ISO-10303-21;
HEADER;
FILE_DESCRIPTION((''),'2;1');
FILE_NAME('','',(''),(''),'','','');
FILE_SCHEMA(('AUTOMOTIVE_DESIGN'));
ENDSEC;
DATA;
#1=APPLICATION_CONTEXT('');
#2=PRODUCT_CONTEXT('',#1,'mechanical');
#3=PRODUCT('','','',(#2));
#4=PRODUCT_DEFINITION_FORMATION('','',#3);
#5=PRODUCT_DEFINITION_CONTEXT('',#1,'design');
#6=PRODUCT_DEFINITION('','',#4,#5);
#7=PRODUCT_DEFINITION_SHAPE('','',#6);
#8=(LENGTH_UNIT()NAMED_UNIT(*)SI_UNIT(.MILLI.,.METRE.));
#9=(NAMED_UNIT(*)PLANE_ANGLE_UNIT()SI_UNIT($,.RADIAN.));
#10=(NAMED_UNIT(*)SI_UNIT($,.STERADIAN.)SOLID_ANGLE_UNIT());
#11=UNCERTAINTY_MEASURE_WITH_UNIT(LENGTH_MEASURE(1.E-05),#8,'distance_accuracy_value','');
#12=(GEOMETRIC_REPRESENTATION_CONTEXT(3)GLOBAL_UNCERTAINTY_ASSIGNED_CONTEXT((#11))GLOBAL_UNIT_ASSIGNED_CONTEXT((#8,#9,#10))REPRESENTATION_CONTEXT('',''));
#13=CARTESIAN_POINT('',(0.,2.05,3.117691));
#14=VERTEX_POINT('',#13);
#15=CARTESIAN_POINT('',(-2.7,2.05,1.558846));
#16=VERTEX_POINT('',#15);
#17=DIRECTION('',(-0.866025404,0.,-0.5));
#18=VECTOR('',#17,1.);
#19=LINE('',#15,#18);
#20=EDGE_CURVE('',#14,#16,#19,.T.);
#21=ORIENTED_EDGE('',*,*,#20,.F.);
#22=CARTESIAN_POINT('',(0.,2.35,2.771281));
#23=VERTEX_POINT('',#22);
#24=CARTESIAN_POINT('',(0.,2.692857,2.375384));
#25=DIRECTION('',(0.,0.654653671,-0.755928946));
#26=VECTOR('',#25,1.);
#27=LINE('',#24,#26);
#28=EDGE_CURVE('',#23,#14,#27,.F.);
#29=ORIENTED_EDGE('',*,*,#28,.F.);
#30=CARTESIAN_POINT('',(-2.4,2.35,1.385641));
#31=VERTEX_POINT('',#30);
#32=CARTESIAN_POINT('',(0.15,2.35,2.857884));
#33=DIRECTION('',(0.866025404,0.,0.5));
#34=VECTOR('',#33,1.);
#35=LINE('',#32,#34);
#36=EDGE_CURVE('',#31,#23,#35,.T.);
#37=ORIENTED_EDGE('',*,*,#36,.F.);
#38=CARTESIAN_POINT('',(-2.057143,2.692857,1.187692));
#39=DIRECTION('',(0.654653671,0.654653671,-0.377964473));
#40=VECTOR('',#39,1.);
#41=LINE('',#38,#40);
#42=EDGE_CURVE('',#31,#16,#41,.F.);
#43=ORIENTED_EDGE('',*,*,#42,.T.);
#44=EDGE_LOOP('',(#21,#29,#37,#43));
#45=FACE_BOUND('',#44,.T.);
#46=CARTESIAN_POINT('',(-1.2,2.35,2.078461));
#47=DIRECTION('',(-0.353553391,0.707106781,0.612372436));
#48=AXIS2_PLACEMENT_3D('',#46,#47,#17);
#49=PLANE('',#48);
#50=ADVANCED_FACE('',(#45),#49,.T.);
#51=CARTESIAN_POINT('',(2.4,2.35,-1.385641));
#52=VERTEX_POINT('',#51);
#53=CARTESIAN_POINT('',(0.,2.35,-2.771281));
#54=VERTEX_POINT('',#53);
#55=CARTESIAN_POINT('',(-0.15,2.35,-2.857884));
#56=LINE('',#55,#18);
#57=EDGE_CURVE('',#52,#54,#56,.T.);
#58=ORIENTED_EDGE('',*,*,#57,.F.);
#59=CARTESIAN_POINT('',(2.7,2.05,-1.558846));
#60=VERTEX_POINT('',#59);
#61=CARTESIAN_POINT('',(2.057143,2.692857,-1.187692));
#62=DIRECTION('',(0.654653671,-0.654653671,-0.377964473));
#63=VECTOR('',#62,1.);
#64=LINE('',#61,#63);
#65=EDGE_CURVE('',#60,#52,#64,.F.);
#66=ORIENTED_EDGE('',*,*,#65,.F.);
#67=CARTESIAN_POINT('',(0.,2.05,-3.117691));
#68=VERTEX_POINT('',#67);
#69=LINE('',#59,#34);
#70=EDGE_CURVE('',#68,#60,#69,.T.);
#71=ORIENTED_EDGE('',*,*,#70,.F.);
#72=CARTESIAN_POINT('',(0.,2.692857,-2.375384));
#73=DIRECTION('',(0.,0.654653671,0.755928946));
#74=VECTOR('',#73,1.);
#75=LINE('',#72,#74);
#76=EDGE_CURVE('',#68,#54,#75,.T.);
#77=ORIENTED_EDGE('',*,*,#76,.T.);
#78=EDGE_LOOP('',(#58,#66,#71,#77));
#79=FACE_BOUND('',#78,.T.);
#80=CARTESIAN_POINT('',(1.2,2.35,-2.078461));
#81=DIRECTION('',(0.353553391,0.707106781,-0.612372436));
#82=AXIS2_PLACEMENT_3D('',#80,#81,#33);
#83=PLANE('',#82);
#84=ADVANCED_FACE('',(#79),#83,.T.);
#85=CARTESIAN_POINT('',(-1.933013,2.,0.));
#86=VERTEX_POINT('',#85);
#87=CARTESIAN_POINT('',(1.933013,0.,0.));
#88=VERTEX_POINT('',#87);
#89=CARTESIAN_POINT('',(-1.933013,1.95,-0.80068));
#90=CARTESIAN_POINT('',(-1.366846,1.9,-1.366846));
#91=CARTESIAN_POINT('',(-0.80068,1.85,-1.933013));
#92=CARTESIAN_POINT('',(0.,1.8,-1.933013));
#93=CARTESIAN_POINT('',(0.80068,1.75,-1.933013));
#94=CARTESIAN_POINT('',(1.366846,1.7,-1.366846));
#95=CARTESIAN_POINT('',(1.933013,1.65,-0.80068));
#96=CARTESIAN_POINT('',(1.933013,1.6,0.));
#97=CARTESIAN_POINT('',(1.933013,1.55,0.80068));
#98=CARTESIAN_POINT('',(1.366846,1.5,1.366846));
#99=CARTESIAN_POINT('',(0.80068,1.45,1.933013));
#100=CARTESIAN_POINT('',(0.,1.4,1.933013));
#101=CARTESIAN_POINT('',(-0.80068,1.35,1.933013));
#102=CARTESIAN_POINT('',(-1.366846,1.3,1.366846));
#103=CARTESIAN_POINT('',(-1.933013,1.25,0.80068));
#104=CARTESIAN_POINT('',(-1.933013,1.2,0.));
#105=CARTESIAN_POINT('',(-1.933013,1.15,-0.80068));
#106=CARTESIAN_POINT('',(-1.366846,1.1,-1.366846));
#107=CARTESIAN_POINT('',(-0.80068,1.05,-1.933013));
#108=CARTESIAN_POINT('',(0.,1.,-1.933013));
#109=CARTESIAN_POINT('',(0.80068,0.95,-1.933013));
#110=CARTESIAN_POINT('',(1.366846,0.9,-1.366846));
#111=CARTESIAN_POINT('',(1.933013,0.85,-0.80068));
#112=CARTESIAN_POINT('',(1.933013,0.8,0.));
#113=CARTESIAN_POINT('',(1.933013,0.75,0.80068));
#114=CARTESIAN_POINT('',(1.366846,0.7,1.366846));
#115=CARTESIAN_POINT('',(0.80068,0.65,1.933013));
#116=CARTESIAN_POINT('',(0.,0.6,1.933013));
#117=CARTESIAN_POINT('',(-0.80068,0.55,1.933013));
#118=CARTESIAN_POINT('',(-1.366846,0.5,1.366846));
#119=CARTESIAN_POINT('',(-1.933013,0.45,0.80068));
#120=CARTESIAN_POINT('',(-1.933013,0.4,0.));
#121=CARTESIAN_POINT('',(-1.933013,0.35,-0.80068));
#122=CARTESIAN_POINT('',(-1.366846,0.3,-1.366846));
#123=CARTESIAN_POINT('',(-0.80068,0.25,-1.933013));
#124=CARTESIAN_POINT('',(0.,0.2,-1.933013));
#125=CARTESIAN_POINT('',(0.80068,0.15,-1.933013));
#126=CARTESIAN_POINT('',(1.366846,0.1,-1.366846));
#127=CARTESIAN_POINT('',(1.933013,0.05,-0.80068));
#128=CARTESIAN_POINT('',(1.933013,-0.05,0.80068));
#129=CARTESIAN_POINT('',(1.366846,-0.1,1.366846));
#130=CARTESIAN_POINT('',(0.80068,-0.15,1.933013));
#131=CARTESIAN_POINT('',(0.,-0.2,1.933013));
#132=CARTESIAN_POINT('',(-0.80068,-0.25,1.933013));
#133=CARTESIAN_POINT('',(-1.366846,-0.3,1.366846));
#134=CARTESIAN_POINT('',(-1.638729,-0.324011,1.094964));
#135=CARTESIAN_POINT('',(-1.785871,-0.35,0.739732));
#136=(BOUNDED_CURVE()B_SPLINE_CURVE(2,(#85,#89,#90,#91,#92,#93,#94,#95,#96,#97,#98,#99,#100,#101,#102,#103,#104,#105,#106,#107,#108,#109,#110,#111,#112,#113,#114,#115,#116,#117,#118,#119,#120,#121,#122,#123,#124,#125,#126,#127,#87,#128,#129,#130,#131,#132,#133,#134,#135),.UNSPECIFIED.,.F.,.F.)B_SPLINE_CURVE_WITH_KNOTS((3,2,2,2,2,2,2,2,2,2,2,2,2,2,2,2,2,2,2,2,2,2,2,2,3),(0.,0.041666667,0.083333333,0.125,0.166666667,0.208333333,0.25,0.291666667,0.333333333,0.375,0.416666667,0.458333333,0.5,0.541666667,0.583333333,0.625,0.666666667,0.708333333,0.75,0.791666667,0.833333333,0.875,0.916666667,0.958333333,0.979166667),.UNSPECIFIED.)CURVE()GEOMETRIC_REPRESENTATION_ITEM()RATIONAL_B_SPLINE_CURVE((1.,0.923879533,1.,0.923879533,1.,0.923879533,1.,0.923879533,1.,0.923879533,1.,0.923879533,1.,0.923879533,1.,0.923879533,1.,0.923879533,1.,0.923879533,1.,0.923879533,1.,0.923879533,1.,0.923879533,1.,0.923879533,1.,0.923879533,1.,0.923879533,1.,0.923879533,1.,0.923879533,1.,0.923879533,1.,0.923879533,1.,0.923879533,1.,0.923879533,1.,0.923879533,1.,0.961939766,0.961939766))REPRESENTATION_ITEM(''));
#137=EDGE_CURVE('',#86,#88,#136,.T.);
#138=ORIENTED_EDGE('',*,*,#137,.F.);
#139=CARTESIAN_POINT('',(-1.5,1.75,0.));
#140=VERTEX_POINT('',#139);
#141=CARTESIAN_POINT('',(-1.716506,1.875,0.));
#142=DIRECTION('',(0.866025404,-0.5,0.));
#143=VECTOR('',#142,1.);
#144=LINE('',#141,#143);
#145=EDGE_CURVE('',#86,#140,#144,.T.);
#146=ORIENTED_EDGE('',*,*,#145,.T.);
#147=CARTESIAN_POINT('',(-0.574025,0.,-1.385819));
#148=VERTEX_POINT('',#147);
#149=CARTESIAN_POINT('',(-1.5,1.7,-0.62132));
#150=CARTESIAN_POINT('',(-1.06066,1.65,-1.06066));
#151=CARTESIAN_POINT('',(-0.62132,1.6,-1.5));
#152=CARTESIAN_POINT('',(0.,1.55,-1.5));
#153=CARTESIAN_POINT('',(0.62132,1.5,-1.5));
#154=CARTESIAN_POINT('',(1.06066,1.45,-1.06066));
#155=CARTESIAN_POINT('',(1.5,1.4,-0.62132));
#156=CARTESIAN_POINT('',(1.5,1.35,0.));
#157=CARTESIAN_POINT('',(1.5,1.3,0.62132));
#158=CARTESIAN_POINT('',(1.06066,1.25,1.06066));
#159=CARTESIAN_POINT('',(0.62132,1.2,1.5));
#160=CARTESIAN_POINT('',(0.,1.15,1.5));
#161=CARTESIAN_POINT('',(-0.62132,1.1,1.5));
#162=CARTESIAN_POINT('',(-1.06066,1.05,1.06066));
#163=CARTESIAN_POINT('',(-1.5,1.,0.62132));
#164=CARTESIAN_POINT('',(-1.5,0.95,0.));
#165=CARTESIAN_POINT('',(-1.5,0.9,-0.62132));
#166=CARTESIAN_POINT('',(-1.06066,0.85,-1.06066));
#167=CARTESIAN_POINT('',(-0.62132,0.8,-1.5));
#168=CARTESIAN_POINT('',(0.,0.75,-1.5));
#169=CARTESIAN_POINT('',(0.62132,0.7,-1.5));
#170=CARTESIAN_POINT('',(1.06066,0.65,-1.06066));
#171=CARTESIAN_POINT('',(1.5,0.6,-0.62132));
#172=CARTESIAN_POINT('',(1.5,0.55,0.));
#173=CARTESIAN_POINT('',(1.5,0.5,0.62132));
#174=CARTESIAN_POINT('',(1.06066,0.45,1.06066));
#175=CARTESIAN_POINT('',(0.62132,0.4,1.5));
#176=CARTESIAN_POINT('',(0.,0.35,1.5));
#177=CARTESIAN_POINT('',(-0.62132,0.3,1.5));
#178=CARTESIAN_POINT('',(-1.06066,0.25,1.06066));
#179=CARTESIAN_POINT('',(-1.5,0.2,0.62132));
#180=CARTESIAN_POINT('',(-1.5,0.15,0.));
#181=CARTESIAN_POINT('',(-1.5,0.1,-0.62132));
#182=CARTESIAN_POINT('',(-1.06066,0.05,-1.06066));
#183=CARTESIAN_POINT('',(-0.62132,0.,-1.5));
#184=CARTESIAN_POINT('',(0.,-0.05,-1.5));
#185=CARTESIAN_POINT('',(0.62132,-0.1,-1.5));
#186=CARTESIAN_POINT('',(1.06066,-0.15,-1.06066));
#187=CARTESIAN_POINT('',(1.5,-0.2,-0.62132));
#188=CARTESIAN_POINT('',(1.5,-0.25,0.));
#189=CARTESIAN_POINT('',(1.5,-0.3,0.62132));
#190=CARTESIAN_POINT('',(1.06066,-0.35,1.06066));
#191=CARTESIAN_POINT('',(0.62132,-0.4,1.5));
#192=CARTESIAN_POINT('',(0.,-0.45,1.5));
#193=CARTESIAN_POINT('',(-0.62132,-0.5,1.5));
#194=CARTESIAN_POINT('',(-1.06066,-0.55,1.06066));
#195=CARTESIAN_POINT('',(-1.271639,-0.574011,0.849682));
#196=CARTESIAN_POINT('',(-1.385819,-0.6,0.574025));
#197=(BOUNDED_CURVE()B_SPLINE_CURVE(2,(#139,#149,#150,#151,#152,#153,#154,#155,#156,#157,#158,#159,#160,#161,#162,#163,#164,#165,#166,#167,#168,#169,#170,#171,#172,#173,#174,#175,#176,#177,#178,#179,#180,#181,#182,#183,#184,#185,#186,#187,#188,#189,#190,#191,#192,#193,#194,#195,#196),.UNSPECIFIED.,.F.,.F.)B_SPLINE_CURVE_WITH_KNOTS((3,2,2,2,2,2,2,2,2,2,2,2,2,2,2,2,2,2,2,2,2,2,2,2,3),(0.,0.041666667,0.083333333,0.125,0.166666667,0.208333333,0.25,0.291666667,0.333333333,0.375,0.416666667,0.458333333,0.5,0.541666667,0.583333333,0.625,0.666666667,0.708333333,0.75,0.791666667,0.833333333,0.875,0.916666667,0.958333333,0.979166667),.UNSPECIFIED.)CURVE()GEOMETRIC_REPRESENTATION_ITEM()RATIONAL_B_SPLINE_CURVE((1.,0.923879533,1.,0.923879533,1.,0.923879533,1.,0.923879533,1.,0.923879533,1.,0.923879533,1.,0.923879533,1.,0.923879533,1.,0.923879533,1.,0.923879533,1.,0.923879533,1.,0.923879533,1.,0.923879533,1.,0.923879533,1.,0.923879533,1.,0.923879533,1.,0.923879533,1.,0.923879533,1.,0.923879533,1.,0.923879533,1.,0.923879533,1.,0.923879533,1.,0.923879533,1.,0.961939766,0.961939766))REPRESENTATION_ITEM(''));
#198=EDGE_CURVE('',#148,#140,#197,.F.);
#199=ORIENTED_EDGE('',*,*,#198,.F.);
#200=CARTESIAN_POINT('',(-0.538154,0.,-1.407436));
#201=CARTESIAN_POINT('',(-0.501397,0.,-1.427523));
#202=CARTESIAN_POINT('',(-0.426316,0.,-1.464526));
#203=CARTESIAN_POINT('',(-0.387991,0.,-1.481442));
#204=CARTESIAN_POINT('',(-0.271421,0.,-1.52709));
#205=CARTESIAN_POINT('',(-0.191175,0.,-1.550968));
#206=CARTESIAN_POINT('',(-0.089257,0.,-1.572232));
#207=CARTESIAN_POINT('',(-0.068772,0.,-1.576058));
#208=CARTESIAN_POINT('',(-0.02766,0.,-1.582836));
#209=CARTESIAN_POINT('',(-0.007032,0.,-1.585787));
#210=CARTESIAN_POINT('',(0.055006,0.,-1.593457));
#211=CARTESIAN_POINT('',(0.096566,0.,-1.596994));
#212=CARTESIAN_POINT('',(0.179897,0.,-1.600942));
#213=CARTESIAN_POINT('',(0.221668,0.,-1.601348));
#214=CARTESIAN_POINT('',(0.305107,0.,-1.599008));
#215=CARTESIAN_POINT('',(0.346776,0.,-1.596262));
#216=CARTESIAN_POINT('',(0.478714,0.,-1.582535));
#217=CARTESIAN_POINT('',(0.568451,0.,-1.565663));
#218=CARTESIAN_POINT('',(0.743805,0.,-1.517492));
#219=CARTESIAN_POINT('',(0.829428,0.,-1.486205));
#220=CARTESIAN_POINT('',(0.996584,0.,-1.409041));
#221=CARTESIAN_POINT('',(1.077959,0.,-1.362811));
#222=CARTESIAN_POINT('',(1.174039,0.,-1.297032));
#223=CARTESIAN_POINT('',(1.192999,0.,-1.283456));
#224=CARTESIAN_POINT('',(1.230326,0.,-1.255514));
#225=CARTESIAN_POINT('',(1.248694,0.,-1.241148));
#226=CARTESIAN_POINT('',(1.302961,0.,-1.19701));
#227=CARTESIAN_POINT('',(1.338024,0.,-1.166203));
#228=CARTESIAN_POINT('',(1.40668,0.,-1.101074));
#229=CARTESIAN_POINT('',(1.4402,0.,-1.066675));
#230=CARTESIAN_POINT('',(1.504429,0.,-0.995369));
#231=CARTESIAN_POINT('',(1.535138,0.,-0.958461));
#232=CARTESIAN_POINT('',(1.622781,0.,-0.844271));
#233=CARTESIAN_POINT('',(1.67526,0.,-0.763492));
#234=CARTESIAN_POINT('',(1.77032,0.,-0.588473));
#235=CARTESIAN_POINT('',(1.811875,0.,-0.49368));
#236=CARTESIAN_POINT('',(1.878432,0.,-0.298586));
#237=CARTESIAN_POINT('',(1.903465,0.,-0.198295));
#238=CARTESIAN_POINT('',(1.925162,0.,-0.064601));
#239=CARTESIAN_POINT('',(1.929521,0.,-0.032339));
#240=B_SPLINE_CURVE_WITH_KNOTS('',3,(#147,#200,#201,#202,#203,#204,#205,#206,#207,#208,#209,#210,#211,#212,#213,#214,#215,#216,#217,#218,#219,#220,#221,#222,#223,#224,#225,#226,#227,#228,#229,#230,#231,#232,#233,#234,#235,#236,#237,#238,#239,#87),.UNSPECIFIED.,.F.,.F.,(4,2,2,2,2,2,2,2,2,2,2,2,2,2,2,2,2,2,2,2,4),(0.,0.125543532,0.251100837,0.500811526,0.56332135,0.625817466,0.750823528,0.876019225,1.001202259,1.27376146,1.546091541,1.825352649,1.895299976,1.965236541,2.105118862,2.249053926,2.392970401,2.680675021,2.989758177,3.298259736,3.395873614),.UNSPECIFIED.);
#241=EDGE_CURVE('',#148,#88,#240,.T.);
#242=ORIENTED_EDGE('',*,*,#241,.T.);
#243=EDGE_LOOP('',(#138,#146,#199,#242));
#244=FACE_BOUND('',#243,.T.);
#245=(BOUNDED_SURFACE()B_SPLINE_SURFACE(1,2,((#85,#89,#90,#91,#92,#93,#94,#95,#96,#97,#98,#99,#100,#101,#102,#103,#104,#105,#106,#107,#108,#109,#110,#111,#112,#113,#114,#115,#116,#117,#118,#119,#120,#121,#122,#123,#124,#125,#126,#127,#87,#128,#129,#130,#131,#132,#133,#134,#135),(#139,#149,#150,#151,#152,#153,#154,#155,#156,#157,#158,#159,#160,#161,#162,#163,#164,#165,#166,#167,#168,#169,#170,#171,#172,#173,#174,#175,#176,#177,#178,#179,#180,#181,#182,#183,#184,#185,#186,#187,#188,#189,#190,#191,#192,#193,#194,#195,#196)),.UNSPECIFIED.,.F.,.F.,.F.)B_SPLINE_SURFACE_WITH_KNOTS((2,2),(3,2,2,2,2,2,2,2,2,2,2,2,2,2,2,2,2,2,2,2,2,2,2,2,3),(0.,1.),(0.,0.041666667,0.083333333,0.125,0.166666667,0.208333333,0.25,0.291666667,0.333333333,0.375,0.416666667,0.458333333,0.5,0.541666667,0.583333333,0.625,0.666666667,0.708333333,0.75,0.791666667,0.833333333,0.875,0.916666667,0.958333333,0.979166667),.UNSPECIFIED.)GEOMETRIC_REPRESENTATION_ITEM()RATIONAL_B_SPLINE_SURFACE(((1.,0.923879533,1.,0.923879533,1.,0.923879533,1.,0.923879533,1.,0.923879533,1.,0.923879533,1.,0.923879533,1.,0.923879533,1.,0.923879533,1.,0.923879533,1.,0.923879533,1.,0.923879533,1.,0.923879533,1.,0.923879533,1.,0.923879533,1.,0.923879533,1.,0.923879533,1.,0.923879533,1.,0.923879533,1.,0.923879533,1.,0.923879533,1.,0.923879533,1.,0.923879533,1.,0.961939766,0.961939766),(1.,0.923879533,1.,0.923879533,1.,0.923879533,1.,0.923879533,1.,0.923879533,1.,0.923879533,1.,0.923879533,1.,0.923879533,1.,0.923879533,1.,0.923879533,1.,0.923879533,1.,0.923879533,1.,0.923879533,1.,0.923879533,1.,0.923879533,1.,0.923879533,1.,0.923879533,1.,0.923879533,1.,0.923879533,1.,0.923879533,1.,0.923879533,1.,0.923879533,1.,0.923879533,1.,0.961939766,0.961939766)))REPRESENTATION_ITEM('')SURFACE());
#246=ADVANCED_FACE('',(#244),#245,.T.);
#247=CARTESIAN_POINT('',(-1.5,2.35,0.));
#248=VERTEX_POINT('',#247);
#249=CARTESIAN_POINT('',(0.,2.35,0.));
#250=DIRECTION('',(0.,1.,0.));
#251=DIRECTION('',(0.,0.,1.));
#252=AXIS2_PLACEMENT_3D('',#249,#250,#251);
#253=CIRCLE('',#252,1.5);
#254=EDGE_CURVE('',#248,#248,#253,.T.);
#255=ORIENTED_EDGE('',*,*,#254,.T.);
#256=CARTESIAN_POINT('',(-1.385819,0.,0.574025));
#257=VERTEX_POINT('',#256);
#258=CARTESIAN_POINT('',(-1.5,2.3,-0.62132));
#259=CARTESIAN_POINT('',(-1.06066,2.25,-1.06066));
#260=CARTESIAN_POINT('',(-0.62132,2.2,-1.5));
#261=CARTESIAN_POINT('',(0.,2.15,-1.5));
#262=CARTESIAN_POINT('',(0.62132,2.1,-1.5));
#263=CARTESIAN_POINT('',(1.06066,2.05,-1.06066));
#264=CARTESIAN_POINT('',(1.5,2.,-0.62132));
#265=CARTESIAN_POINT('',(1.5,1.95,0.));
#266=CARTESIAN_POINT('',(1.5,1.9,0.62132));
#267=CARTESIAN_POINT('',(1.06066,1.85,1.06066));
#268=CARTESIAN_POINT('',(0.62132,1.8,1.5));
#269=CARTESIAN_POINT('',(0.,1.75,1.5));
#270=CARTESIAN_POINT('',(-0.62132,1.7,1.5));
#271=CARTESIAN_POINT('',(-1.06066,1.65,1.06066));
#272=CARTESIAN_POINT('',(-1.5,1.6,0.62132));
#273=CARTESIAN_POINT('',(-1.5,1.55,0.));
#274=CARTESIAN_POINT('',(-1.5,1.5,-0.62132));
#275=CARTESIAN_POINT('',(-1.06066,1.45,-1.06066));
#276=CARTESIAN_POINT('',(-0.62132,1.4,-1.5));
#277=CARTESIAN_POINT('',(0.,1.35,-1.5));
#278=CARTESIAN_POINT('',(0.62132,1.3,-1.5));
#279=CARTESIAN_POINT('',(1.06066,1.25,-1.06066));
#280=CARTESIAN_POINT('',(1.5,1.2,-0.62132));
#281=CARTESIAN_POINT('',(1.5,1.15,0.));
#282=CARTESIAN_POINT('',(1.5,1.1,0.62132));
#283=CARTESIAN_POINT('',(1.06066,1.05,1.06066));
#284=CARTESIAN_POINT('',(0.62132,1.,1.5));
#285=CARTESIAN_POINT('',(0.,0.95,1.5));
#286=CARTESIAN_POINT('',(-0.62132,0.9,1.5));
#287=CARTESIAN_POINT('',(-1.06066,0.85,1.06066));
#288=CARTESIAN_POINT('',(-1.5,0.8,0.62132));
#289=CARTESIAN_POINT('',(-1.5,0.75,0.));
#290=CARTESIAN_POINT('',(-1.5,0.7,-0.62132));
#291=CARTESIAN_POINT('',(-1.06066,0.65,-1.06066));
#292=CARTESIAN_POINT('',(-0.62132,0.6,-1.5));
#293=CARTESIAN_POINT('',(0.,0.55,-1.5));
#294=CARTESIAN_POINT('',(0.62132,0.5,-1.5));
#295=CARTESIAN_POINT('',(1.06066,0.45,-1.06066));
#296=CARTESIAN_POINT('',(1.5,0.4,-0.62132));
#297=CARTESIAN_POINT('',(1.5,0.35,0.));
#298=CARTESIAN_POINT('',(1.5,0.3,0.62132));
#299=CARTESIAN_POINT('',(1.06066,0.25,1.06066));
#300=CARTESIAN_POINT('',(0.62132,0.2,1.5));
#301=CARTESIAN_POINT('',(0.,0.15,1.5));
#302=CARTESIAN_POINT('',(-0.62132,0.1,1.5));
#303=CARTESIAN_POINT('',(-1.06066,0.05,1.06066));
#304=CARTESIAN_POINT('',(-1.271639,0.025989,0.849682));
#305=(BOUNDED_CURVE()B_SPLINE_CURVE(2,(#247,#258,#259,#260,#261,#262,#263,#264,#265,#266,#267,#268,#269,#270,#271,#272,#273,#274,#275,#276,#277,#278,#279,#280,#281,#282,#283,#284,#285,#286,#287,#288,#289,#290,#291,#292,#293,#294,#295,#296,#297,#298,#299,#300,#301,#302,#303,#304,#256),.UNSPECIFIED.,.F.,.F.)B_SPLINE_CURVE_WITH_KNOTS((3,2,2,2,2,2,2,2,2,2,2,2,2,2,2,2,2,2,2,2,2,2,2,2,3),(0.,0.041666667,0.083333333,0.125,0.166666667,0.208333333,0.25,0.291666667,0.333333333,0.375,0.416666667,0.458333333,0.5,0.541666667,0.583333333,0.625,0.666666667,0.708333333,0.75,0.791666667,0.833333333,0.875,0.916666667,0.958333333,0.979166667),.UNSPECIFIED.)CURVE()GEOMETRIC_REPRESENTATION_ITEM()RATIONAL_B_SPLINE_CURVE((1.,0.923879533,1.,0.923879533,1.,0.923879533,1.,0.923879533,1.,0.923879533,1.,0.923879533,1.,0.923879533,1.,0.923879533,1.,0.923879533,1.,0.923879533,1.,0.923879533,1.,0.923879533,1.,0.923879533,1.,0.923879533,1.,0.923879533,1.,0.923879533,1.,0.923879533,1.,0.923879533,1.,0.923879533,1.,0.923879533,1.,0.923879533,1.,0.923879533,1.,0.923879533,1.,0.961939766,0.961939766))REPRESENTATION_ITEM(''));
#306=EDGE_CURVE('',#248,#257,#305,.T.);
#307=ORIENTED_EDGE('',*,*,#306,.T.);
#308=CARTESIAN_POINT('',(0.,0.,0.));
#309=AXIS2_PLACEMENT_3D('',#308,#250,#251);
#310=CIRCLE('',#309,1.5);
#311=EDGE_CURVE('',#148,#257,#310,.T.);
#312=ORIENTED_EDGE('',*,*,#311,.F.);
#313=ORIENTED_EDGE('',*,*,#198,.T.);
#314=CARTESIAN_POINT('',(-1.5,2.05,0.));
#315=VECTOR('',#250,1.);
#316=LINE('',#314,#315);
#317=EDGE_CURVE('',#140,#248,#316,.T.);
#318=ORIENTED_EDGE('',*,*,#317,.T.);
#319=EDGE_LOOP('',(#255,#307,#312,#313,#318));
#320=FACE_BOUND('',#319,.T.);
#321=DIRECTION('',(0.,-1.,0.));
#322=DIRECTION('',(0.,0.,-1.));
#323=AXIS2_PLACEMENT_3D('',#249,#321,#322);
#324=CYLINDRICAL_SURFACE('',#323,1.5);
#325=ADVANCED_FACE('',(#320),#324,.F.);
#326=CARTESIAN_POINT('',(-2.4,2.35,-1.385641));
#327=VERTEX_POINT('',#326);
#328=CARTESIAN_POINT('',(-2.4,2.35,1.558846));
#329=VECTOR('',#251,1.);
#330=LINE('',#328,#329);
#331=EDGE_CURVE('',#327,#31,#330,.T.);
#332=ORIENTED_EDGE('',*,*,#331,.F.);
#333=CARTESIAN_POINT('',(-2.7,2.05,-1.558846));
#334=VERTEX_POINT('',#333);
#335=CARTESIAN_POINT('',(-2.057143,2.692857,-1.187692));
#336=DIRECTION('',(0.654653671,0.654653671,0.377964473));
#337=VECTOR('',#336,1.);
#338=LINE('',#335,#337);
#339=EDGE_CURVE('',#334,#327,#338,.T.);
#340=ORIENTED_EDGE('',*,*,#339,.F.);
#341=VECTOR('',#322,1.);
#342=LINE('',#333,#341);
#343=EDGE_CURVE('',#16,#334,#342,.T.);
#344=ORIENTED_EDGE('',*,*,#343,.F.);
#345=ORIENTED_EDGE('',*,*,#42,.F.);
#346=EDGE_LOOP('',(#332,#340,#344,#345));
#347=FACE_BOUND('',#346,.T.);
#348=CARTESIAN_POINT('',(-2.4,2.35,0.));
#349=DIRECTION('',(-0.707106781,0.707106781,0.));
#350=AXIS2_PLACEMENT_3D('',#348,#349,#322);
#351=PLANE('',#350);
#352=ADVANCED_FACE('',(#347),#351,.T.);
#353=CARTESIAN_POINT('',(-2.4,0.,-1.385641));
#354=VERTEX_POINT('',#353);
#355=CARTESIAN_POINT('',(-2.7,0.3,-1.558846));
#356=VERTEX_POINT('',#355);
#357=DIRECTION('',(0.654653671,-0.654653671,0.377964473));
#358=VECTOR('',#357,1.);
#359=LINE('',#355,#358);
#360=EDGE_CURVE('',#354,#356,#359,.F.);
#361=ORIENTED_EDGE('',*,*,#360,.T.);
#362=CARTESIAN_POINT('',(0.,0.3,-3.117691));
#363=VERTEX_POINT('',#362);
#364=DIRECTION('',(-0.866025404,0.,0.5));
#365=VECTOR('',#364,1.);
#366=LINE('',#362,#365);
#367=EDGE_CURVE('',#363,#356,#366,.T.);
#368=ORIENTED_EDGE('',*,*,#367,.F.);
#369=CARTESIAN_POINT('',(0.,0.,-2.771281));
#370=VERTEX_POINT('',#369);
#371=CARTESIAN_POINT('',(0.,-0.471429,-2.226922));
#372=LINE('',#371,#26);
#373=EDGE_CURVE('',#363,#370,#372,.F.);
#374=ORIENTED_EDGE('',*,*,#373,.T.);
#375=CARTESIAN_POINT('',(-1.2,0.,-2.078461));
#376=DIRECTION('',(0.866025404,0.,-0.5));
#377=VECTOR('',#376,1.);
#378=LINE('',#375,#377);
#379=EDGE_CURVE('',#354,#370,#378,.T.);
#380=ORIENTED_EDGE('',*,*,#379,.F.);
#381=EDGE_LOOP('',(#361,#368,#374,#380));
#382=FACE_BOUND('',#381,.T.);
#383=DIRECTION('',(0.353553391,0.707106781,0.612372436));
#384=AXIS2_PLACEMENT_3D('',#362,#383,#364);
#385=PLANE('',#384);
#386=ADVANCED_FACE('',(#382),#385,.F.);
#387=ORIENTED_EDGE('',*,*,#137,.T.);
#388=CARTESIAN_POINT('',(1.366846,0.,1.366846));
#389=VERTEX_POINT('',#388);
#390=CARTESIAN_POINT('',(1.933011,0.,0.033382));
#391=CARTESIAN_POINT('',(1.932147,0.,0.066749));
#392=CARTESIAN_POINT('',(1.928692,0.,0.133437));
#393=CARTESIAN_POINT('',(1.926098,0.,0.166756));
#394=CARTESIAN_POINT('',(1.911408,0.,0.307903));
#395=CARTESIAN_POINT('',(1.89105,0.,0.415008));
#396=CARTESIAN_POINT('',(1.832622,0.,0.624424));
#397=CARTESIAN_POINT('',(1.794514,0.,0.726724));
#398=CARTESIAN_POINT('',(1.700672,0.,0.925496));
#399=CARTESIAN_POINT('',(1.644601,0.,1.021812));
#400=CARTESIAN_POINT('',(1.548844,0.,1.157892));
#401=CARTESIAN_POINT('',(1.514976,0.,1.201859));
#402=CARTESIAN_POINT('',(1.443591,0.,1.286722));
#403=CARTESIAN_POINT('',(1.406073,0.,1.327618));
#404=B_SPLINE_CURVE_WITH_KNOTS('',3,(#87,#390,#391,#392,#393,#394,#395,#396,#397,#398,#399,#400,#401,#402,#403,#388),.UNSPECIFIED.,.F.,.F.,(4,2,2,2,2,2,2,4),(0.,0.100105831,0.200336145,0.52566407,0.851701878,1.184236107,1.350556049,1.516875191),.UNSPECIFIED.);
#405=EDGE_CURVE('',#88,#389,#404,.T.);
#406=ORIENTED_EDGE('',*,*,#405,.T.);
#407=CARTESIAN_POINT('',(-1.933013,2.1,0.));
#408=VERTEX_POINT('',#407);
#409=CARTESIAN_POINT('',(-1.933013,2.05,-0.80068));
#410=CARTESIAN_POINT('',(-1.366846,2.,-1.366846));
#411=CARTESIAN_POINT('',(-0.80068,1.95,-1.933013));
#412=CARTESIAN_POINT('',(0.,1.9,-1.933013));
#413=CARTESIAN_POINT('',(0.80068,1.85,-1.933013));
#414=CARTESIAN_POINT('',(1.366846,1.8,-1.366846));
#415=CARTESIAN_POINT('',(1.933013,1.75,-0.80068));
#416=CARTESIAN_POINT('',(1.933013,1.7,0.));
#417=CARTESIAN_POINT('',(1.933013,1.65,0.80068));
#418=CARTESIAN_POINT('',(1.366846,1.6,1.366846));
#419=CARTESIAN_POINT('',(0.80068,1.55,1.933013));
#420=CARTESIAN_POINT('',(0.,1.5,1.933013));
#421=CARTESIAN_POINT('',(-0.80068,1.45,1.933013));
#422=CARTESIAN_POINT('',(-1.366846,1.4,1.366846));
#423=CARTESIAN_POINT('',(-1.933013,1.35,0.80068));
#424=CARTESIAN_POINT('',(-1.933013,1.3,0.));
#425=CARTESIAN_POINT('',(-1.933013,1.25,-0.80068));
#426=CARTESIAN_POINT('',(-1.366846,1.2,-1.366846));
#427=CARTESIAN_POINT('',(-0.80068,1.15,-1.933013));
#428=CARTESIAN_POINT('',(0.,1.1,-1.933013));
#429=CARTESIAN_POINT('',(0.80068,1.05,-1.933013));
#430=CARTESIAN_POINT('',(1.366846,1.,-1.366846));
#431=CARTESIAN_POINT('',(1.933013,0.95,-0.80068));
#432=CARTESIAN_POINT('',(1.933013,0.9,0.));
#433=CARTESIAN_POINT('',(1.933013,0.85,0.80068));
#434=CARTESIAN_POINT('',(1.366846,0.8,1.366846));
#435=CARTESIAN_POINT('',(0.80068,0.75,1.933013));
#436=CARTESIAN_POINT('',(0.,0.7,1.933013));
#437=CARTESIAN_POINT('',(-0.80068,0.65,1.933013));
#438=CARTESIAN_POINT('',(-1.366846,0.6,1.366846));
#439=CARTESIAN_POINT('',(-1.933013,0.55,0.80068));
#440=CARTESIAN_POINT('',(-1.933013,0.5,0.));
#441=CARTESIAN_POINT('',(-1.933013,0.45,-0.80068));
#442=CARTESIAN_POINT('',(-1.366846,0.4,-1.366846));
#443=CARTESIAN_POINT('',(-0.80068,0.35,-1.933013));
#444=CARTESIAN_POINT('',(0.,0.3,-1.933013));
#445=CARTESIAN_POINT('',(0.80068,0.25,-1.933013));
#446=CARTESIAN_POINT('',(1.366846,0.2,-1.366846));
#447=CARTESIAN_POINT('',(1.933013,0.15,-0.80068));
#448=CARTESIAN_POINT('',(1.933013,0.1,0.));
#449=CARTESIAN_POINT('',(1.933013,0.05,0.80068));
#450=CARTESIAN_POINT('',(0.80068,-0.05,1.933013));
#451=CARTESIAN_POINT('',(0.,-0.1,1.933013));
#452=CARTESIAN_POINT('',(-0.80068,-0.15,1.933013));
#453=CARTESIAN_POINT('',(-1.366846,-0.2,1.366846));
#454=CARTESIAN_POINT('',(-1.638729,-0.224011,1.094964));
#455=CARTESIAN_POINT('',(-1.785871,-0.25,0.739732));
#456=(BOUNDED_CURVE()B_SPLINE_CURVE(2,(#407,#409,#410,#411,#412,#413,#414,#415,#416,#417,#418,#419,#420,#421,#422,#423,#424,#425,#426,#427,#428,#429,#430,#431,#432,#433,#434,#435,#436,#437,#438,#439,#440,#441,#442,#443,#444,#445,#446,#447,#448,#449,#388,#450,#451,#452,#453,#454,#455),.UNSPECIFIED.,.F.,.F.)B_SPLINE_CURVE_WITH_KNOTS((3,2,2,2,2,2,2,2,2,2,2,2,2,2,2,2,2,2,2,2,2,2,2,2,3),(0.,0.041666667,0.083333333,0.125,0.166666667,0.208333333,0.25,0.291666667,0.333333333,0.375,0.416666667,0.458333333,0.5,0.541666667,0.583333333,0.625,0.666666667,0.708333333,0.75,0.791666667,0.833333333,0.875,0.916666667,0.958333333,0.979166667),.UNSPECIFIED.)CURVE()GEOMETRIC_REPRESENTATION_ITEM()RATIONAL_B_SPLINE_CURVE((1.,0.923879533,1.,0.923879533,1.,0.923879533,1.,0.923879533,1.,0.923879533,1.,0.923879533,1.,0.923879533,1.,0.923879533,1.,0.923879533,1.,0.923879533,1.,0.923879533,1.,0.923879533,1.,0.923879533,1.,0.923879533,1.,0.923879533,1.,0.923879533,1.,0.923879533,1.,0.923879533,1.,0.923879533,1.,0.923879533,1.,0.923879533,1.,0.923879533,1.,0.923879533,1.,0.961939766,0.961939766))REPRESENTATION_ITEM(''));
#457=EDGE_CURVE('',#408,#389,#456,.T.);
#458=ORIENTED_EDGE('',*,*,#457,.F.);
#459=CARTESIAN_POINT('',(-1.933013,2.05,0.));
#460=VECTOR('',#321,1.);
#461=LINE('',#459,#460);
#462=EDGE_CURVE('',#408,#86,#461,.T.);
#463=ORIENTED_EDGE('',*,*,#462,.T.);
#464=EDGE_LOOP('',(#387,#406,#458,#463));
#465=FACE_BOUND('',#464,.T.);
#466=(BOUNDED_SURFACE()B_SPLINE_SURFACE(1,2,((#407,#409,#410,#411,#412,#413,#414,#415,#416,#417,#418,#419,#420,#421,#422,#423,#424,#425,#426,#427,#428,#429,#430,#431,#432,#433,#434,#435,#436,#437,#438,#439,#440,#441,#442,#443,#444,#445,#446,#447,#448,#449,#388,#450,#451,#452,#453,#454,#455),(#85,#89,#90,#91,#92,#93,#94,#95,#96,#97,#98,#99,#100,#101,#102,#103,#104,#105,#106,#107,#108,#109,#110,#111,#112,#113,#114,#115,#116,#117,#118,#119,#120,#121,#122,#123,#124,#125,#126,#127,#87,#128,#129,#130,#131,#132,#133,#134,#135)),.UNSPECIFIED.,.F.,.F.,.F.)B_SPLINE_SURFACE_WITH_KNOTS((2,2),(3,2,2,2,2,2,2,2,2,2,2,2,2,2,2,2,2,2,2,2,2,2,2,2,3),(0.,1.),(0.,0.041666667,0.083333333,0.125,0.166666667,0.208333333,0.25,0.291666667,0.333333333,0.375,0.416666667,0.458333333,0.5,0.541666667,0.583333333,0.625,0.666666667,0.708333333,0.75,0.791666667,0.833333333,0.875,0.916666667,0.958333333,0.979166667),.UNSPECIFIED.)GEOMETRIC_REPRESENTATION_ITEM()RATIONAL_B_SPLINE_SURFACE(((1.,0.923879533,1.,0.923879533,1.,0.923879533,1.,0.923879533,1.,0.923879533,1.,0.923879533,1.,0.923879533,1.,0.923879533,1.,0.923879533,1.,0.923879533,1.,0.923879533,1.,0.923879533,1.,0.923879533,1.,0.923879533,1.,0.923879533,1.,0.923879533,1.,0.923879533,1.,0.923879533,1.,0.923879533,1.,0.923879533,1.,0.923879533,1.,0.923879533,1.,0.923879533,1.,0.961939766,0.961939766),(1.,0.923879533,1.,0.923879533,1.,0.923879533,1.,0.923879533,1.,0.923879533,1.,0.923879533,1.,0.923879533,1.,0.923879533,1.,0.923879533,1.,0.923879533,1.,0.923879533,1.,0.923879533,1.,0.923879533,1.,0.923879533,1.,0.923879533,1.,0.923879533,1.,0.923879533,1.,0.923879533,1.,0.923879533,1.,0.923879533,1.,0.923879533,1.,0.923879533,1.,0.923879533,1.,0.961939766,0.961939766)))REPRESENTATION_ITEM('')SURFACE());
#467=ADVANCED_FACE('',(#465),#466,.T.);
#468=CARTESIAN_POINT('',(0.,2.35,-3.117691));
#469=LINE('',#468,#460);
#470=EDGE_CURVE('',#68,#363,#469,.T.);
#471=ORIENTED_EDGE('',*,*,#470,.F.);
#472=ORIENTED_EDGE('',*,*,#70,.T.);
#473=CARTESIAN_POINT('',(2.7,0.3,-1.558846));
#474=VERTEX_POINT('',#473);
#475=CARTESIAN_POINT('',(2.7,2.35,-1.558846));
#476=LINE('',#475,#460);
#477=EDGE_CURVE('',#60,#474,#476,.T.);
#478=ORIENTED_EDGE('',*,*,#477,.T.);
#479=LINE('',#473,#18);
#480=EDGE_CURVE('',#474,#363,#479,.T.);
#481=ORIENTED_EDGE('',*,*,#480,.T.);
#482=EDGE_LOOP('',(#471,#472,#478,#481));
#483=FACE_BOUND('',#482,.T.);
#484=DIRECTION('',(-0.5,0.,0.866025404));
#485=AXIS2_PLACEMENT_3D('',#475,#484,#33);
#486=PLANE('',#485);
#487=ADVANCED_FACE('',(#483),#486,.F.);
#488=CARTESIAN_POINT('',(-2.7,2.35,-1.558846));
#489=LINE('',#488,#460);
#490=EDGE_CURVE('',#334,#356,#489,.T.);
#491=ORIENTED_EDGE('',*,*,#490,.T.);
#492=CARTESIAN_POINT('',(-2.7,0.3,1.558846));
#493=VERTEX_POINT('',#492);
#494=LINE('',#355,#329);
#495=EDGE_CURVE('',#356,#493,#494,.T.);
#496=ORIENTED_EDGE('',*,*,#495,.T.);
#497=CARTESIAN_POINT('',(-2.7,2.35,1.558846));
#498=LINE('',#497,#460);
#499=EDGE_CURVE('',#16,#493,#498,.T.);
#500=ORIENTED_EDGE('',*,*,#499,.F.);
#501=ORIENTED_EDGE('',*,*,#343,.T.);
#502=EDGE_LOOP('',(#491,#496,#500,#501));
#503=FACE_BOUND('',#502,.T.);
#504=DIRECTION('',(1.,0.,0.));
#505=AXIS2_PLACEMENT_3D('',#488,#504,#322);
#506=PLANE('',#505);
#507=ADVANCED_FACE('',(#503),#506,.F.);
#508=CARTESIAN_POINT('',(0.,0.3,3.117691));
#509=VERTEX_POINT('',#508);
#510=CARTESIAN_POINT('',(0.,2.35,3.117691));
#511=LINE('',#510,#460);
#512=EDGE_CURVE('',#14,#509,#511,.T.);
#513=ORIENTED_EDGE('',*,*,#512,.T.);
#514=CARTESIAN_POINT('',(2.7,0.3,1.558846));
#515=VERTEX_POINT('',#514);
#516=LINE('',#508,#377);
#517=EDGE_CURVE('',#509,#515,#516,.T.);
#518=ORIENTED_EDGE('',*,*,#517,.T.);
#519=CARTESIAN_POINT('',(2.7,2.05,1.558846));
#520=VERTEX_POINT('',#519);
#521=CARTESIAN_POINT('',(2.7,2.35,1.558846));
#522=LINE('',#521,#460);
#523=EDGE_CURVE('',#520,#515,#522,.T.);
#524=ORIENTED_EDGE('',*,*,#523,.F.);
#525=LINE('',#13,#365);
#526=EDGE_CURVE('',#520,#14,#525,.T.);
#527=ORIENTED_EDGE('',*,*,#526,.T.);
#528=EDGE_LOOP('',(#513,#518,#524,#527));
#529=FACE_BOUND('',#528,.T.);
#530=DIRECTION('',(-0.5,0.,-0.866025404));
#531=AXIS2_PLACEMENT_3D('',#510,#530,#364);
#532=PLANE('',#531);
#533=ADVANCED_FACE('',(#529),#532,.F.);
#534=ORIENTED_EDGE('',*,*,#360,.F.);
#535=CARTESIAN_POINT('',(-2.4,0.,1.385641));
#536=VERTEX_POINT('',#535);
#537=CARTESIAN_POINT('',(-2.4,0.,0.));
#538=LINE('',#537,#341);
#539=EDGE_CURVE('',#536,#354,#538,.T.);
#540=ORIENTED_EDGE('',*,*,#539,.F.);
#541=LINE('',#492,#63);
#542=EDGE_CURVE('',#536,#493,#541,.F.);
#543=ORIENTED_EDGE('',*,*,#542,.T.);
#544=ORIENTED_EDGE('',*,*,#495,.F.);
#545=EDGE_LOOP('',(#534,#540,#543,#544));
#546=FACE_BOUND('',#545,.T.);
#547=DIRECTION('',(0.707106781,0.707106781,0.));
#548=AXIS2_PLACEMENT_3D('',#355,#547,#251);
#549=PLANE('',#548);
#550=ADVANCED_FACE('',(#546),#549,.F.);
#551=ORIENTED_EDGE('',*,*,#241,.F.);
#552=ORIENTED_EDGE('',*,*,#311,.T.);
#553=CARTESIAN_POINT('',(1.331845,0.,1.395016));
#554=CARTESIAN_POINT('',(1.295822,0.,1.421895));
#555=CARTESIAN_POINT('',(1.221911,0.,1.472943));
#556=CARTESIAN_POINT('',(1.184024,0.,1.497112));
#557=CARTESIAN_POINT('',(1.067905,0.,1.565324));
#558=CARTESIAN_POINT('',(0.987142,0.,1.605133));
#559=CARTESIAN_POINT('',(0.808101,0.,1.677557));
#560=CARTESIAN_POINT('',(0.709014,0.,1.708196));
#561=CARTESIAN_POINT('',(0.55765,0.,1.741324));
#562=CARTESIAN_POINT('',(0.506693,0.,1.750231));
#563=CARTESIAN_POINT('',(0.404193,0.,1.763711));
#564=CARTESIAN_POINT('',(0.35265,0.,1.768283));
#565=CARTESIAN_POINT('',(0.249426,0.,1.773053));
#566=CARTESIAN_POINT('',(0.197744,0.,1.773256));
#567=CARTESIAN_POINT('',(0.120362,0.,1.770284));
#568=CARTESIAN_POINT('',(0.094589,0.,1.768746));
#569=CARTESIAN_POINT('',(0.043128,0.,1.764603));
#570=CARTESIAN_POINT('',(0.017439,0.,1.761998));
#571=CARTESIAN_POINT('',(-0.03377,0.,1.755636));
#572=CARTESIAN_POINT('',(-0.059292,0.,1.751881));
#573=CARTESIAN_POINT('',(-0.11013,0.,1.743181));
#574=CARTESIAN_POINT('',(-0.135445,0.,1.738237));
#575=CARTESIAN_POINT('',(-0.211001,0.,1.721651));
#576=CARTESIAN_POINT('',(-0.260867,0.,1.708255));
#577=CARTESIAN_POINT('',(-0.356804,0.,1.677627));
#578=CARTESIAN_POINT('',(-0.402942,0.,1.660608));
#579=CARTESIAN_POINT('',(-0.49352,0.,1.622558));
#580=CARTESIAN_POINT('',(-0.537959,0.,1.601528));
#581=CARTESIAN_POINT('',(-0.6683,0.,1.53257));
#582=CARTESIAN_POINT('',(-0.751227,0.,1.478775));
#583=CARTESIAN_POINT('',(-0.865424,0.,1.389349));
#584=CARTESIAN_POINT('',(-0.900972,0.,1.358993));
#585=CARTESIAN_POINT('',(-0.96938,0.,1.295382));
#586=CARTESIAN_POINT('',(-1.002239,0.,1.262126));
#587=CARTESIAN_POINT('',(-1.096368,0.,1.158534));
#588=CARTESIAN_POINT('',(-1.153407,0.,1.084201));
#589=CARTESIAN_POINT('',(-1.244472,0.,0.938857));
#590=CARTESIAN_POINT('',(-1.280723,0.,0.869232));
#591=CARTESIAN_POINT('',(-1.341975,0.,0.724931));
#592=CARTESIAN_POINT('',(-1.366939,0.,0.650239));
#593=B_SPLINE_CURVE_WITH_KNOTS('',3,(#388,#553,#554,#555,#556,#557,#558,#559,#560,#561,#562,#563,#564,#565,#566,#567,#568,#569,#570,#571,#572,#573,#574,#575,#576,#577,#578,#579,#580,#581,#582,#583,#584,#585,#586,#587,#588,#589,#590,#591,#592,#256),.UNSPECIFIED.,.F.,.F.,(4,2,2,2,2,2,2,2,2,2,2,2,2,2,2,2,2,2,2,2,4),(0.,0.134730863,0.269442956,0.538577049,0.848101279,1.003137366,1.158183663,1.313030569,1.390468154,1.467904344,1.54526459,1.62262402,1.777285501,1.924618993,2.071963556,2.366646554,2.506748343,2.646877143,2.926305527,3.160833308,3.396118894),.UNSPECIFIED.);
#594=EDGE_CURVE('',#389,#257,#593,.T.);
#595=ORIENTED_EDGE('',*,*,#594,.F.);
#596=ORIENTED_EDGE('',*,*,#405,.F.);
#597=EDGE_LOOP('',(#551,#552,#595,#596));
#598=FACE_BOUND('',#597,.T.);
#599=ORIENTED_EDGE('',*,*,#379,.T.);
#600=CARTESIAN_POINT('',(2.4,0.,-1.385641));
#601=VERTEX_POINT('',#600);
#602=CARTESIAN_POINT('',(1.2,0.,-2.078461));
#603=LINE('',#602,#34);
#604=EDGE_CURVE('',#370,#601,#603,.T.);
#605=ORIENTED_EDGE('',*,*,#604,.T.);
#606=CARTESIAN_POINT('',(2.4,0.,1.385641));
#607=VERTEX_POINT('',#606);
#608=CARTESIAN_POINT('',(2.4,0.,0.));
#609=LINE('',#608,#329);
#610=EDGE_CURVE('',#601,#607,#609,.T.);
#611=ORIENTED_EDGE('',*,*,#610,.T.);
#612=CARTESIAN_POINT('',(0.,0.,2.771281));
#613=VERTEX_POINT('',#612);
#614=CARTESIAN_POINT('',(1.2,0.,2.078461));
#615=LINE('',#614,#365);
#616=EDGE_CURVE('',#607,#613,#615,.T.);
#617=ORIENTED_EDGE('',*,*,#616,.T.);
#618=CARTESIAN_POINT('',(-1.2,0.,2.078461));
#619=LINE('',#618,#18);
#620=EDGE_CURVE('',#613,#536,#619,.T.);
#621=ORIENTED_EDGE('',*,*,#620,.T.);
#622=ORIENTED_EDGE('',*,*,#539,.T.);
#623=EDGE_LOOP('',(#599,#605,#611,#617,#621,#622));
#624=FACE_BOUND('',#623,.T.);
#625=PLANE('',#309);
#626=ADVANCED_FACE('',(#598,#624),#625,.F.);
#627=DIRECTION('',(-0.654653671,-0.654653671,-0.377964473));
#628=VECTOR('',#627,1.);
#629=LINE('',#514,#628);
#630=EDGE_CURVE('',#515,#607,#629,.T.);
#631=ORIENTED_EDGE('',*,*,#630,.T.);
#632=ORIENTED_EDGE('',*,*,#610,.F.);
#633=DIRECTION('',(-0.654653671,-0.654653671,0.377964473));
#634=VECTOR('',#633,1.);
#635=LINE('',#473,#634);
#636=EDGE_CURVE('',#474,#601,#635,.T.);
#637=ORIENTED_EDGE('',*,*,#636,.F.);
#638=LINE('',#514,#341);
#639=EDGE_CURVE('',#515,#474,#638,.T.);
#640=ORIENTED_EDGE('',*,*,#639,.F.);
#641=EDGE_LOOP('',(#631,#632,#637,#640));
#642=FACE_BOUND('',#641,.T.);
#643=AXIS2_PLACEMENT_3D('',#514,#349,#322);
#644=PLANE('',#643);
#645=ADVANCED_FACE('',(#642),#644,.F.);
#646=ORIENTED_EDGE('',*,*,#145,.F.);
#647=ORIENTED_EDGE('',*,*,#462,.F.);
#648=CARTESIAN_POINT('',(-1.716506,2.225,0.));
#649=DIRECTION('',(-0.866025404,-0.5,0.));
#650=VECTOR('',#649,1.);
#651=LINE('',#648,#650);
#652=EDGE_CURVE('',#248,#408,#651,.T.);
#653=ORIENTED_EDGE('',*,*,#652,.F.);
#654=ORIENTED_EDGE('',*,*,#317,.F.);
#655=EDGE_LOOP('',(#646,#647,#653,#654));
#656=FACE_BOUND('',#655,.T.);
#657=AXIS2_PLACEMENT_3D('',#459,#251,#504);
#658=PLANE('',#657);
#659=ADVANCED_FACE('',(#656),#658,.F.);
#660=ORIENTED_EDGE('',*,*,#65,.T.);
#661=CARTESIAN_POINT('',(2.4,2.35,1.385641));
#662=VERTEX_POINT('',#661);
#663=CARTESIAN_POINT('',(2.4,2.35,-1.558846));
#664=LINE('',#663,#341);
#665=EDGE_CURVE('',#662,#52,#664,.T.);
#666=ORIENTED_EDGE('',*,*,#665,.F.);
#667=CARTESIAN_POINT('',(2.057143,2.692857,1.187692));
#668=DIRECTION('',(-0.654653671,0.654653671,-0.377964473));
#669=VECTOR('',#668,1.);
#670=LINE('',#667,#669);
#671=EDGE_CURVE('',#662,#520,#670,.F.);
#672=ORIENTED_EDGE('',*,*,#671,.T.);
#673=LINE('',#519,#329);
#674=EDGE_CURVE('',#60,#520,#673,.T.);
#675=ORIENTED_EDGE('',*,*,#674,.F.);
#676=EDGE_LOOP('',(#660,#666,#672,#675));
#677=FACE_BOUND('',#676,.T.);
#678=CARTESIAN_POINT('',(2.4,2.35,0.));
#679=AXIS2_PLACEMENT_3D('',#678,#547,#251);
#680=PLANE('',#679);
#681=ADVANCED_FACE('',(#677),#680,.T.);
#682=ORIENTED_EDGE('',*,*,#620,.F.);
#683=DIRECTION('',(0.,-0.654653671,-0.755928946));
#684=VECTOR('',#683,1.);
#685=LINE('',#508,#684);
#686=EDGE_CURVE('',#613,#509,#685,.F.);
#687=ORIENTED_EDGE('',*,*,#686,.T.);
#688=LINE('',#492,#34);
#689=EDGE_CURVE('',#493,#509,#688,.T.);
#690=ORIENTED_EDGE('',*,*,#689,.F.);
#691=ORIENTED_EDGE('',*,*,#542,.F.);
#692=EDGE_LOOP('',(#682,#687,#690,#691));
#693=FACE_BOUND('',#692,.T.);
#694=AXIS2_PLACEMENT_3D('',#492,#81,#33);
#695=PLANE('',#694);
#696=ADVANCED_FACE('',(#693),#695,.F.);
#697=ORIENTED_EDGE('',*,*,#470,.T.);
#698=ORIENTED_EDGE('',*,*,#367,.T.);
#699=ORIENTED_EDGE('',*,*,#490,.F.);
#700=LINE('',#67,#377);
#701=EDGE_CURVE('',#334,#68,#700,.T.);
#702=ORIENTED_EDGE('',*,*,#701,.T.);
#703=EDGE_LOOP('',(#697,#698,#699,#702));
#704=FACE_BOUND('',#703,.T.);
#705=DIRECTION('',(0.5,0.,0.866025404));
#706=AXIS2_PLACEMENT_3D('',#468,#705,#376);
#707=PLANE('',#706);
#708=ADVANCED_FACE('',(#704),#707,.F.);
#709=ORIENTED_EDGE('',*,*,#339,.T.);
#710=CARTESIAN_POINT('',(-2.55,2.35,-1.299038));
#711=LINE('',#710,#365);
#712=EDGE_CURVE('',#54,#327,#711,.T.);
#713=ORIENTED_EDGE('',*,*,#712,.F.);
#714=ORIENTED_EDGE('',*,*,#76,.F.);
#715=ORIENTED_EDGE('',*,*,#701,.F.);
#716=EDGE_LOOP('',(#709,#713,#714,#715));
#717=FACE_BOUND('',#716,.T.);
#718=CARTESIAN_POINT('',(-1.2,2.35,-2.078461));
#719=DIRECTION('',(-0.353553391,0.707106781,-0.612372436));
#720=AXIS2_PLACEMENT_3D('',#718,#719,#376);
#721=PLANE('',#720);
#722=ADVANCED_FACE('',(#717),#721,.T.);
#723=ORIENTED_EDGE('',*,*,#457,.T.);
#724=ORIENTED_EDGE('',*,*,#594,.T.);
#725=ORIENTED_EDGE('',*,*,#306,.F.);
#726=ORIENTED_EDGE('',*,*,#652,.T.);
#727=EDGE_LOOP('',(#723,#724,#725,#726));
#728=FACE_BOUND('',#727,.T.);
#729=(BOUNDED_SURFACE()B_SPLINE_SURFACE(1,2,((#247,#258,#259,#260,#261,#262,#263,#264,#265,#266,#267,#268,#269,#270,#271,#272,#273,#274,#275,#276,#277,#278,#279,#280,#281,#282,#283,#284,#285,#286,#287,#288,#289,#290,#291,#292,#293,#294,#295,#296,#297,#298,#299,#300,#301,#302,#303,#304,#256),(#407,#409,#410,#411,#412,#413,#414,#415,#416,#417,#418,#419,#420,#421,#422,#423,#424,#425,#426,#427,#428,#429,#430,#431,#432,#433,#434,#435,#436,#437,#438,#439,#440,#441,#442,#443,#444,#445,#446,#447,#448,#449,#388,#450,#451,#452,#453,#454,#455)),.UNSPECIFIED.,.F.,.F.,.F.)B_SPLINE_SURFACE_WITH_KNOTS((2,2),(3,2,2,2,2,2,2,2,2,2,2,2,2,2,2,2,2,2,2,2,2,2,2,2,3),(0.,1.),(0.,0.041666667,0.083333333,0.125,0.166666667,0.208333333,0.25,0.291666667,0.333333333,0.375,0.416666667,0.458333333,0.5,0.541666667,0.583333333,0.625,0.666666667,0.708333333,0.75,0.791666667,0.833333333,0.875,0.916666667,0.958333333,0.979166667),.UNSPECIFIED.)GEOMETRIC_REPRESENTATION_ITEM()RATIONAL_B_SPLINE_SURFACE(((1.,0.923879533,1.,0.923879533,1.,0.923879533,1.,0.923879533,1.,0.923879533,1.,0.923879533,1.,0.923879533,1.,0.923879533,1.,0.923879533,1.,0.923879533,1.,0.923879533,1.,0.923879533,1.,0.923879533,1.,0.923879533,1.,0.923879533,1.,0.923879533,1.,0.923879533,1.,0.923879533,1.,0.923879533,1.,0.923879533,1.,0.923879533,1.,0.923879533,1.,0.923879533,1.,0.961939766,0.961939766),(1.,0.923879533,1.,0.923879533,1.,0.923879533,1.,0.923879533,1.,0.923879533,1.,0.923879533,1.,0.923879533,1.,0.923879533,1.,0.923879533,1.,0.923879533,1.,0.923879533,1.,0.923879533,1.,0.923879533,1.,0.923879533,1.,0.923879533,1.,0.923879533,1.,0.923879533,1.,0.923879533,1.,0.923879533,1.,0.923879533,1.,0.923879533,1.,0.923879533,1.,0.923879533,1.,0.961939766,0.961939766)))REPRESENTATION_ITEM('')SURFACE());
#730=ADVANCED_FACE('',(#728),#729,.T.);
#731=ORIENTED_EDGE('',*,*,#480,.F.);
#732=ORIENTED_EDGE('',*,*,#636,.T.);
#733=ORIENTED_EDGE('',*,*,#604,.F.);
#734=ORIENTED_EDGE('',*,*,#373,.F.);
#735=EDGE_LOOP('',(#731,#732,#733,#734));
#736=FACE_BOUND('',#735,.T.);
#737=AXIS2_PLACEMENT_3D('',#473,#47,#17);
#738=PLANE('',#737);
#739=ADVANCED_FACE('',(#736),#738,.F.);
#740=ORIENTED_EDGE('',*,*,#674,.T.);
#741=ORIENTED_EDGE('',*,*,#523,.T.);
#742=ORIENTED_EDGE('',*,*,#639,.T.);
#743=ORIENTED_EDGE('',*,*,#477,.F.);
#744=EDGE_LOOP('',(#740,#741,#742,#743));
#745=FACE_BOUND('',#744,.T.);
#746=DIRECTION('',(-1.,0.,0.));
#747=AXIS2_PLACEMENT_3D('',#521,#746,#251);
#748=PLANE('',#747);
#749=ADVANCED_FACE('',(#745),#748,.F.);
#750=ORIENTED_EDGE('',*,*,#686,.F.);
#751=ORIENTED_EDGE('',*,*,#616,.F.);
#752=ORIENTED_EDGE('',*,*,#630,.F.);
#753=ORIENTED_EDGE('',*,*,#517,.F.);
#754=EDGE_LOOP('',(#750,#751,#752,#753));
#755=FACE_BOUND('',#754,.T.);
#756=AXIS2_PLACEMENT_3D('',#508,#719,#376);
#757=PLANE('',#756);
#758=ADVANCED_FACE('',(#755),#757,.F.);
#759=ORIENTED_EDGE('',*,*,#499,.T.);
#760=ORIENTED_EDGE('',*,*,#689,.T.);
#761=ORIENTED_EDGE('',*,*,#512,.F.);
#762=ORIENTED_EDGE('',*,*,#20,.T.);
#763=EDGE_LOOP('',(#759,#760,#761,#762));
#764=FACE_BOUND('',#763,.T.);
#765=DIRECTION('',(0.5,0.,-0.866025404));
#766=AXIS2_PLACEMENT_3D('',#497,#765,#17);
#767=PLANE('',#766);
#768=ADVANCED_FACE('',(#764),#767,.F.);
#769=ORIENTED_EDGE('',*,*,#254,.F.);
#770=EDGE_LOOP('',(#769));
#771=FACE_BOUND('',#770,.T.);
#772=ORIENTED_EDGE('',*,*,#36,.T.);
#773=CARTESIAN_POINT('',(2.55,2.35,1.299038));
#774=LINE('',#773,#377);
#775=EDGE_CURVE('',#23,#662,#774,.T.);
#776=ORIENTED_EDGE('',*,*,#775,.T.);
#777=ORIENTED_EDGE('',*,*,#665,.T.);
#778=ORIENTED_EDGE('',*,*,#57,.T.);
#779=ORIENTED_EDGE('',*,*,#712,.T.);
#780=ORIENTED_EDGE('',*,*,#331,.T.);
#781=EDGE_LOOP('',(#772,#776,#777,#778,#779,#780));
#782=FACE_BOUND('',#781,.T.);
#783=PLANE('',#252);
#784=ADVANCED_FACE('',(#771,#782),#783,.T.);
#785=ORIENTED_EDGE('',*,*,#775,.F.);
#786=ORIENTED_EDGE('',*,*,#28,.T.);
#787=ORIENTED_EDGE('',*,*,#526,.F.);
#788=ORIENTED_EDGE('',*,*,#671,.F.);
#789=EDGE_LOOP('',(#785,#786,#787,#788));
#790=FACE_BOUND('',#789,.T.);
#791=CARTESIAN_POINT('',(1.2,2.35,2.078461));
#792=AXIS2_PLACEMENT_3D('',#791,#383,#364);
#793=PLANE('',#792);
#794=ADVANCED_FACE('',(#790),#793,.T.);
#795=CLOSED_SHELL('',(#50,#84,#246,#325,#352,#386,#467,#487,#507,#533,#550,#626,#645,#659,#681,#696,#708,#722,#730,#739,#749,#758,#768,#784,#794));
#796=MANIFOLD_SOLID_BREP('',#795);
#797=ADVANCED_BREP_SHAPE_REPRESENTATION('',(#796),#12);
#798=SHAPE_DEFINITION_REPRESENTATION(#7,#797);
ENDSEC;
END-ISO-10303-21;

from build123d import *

# Parameters (mm, degrees)
SKETCH_1_R      = 1.5
EXTRUDE_1_DEPTH = 2.35
CHAMFER_1_SIZE  = 0.3
THREAD_1_PITCH  = 0.8


with BuildPart() as part:
    # Sketch 1 → 凸台-拉伸1 (new body)
    with BuildSketch(Plane(origin=(0, 0, 0), x_dir=(1, 0, 0), z_dir=(0, 1, 0))):
        Polygon((0, 3.117691454), (-2.7, 1.558845727), (-2.7, -1.558845727), (0, -3.117691454), (2.7, -1.558845727), (2.7, 1.558845727), align=None)
        with Locations(Location((0, 0, 0), (0, 0, 270))):
            Circle(SKETCH_1_R, mode=Mode.SUBTRACT)
    extrude(amount=EXTRUDE_1_DEPTH)

    # 倒角1
    chamfer_1_edges = [part.edges().sort_by_distance(p)[0] for p in [
        (-2.7, 2.35, 0),
        (-1.35, 2.35, 2.33826859),
        (1.35, 2.35, 2.33826859),
        (2.7, 2.35, 0),
        (1.35, 2.35, -2.33826859),
        (2.7, 0, 0),
        (1.35, 0, 2.33826859),
        (-1.35, 0, 2.33826859),
        (-1.35, 2.35, -2.33826859),
        (-2.7, 0, 0),
        (-1.35, 0, -2.33826859),
        (1.35, 0, -2.33826859),
    ]]
    chamfer(chamfer_1_edges, length=CHAMFER_1_SIZE)

    # 螺纹线1: the profile of Sketch 1 2 profile screwed along a right-hand helix of 2.9375 turns, 8 arcs to a turn; built about Z, then put on its axis
    thread_1_z = Axis((0, 0, 0), (0, 0, 1))
    thread_1_corners = [(1.4997, 0, -0.000173205), (1.9330127, 0, 0.249999999), (1.9330127, 0, 0.349999999), (1.4997, 0, 0.600173203)]
    with BuildLine(mode=Mode.PRIVATE) as thread_1_profile:
        Line(thread_1_corners[0], thread_1_corners[1])
        Line(thread_1_corners[1], thread_1_corners[2])
        Line(thread_1_corners[2], thread_1_corners[3])
        Line(thread_1_corners[3], thread_1_corners[0])
    thread_1_cap = Face(thread_1_profile.wire())
    thread_1_turn_angles = [0, 22.5, 45, 67.5, 90, 112.5, 135, 157.5, 180, 202.5, 225, 247.5, 270, 292.5, 315, 337.5, 360]
    thread_1_turn_weights = [1, 0.9238795325112867, 1, 0.9238795325112867, 1, 0.9238795325112867, 1, 0.9238795325112867, 1, 0.9238795325112867, 1, 0.9238795325112867, 1, 0.9238795325112867, 1, 0.9238795325112867, 1]
    thread_1_turn_rails = [Edge.make_bspline([Vector(p[0], p[1], 0).rotate(thread_1_z, thread_1_turn_angles[k]) / thread_1_turn_weights[k] + Vector(0, 0, p[2] + THREAD_1_PITCH * thread_1_turn_angles[k] / 360) for k in range(17)], [0, 0, 0, 1, 1, 2, 2, 3, 3, 4, 4, 5, 5, 6, 6, 7, 7, 8, 8, 8], 2, thread_1_turn_weights) for p in thread_1_corners]
    thread_1_turn_sides = [Face.make_surface_from_curves(thread_1_turn_rails[p[0]], thread_1_turn_rails[p[1]]) for p in [(0, 1), (1, 2), (2, 3), (3, 0)]]
    thread_1_last_angles = [720, 742.5, 765, 787.5, 810, 832.5, 855, 877.5, 900, 922.5, 945, 967.5, 990, 1012.5, 1035, 1046.25, 1057.5]
    thread_1_last_weights = [1, 0.9238795325112867, 1, 0.9238795325112867, 1, 0.9238795325112867, 1, 0.9238795325112867, 1, 0.9238795325112867, 1, 0.9238795325112867, 1, 0.9238795325112867, 1, 0.9807852804032304, 1]
    thread_1_last_rails = [Edge.make_bspline([Vector(p[0], p[1], 0).rotate(thread_1_z, thread_1_last_angles[k]) / thread_1_last_weights[k] + Vector(0, 0, p[2] + THREAD_1_PITCH * thread_1_last_angles[k] / 360) for k in range(17)], [0, 0, 0, 1, 1, 2, 2, 3, 3, 4, 4, 5, 5, 6, 6, 7, 7, 8, 8, 8], 2, thread_1_last_weights) for p in thread_1_corners]
    thread_1_last_sides = [Face.make_surface_from_curves(thread_1_last_rails[p[0]], thread_1_last_rails[p[1]]) for p in [(0, 1), (1, 2), (2, 3), (3, 0)]]
    thread_1 = Plane(origin=(0, 2.35, 0), x_dir=(-1, 0, 0), z_dir=(0, -1, 0)) * Solid(Shell([*[p.moved(Location((0, 0, THREAD_1_PITCH * i))) for i in range(2) for p in thread_1_turn_sides], *thread_1_last_sides, thread_1_cap, thread_1_cap.rotate(thread_1_z, 1057.5).moved(Location((0, 0, THREAD_1_PITCH * 1057.5 / 360)))]))
    add(thread_1, mode=Mode.SUBTRACT)


solid = part.part
